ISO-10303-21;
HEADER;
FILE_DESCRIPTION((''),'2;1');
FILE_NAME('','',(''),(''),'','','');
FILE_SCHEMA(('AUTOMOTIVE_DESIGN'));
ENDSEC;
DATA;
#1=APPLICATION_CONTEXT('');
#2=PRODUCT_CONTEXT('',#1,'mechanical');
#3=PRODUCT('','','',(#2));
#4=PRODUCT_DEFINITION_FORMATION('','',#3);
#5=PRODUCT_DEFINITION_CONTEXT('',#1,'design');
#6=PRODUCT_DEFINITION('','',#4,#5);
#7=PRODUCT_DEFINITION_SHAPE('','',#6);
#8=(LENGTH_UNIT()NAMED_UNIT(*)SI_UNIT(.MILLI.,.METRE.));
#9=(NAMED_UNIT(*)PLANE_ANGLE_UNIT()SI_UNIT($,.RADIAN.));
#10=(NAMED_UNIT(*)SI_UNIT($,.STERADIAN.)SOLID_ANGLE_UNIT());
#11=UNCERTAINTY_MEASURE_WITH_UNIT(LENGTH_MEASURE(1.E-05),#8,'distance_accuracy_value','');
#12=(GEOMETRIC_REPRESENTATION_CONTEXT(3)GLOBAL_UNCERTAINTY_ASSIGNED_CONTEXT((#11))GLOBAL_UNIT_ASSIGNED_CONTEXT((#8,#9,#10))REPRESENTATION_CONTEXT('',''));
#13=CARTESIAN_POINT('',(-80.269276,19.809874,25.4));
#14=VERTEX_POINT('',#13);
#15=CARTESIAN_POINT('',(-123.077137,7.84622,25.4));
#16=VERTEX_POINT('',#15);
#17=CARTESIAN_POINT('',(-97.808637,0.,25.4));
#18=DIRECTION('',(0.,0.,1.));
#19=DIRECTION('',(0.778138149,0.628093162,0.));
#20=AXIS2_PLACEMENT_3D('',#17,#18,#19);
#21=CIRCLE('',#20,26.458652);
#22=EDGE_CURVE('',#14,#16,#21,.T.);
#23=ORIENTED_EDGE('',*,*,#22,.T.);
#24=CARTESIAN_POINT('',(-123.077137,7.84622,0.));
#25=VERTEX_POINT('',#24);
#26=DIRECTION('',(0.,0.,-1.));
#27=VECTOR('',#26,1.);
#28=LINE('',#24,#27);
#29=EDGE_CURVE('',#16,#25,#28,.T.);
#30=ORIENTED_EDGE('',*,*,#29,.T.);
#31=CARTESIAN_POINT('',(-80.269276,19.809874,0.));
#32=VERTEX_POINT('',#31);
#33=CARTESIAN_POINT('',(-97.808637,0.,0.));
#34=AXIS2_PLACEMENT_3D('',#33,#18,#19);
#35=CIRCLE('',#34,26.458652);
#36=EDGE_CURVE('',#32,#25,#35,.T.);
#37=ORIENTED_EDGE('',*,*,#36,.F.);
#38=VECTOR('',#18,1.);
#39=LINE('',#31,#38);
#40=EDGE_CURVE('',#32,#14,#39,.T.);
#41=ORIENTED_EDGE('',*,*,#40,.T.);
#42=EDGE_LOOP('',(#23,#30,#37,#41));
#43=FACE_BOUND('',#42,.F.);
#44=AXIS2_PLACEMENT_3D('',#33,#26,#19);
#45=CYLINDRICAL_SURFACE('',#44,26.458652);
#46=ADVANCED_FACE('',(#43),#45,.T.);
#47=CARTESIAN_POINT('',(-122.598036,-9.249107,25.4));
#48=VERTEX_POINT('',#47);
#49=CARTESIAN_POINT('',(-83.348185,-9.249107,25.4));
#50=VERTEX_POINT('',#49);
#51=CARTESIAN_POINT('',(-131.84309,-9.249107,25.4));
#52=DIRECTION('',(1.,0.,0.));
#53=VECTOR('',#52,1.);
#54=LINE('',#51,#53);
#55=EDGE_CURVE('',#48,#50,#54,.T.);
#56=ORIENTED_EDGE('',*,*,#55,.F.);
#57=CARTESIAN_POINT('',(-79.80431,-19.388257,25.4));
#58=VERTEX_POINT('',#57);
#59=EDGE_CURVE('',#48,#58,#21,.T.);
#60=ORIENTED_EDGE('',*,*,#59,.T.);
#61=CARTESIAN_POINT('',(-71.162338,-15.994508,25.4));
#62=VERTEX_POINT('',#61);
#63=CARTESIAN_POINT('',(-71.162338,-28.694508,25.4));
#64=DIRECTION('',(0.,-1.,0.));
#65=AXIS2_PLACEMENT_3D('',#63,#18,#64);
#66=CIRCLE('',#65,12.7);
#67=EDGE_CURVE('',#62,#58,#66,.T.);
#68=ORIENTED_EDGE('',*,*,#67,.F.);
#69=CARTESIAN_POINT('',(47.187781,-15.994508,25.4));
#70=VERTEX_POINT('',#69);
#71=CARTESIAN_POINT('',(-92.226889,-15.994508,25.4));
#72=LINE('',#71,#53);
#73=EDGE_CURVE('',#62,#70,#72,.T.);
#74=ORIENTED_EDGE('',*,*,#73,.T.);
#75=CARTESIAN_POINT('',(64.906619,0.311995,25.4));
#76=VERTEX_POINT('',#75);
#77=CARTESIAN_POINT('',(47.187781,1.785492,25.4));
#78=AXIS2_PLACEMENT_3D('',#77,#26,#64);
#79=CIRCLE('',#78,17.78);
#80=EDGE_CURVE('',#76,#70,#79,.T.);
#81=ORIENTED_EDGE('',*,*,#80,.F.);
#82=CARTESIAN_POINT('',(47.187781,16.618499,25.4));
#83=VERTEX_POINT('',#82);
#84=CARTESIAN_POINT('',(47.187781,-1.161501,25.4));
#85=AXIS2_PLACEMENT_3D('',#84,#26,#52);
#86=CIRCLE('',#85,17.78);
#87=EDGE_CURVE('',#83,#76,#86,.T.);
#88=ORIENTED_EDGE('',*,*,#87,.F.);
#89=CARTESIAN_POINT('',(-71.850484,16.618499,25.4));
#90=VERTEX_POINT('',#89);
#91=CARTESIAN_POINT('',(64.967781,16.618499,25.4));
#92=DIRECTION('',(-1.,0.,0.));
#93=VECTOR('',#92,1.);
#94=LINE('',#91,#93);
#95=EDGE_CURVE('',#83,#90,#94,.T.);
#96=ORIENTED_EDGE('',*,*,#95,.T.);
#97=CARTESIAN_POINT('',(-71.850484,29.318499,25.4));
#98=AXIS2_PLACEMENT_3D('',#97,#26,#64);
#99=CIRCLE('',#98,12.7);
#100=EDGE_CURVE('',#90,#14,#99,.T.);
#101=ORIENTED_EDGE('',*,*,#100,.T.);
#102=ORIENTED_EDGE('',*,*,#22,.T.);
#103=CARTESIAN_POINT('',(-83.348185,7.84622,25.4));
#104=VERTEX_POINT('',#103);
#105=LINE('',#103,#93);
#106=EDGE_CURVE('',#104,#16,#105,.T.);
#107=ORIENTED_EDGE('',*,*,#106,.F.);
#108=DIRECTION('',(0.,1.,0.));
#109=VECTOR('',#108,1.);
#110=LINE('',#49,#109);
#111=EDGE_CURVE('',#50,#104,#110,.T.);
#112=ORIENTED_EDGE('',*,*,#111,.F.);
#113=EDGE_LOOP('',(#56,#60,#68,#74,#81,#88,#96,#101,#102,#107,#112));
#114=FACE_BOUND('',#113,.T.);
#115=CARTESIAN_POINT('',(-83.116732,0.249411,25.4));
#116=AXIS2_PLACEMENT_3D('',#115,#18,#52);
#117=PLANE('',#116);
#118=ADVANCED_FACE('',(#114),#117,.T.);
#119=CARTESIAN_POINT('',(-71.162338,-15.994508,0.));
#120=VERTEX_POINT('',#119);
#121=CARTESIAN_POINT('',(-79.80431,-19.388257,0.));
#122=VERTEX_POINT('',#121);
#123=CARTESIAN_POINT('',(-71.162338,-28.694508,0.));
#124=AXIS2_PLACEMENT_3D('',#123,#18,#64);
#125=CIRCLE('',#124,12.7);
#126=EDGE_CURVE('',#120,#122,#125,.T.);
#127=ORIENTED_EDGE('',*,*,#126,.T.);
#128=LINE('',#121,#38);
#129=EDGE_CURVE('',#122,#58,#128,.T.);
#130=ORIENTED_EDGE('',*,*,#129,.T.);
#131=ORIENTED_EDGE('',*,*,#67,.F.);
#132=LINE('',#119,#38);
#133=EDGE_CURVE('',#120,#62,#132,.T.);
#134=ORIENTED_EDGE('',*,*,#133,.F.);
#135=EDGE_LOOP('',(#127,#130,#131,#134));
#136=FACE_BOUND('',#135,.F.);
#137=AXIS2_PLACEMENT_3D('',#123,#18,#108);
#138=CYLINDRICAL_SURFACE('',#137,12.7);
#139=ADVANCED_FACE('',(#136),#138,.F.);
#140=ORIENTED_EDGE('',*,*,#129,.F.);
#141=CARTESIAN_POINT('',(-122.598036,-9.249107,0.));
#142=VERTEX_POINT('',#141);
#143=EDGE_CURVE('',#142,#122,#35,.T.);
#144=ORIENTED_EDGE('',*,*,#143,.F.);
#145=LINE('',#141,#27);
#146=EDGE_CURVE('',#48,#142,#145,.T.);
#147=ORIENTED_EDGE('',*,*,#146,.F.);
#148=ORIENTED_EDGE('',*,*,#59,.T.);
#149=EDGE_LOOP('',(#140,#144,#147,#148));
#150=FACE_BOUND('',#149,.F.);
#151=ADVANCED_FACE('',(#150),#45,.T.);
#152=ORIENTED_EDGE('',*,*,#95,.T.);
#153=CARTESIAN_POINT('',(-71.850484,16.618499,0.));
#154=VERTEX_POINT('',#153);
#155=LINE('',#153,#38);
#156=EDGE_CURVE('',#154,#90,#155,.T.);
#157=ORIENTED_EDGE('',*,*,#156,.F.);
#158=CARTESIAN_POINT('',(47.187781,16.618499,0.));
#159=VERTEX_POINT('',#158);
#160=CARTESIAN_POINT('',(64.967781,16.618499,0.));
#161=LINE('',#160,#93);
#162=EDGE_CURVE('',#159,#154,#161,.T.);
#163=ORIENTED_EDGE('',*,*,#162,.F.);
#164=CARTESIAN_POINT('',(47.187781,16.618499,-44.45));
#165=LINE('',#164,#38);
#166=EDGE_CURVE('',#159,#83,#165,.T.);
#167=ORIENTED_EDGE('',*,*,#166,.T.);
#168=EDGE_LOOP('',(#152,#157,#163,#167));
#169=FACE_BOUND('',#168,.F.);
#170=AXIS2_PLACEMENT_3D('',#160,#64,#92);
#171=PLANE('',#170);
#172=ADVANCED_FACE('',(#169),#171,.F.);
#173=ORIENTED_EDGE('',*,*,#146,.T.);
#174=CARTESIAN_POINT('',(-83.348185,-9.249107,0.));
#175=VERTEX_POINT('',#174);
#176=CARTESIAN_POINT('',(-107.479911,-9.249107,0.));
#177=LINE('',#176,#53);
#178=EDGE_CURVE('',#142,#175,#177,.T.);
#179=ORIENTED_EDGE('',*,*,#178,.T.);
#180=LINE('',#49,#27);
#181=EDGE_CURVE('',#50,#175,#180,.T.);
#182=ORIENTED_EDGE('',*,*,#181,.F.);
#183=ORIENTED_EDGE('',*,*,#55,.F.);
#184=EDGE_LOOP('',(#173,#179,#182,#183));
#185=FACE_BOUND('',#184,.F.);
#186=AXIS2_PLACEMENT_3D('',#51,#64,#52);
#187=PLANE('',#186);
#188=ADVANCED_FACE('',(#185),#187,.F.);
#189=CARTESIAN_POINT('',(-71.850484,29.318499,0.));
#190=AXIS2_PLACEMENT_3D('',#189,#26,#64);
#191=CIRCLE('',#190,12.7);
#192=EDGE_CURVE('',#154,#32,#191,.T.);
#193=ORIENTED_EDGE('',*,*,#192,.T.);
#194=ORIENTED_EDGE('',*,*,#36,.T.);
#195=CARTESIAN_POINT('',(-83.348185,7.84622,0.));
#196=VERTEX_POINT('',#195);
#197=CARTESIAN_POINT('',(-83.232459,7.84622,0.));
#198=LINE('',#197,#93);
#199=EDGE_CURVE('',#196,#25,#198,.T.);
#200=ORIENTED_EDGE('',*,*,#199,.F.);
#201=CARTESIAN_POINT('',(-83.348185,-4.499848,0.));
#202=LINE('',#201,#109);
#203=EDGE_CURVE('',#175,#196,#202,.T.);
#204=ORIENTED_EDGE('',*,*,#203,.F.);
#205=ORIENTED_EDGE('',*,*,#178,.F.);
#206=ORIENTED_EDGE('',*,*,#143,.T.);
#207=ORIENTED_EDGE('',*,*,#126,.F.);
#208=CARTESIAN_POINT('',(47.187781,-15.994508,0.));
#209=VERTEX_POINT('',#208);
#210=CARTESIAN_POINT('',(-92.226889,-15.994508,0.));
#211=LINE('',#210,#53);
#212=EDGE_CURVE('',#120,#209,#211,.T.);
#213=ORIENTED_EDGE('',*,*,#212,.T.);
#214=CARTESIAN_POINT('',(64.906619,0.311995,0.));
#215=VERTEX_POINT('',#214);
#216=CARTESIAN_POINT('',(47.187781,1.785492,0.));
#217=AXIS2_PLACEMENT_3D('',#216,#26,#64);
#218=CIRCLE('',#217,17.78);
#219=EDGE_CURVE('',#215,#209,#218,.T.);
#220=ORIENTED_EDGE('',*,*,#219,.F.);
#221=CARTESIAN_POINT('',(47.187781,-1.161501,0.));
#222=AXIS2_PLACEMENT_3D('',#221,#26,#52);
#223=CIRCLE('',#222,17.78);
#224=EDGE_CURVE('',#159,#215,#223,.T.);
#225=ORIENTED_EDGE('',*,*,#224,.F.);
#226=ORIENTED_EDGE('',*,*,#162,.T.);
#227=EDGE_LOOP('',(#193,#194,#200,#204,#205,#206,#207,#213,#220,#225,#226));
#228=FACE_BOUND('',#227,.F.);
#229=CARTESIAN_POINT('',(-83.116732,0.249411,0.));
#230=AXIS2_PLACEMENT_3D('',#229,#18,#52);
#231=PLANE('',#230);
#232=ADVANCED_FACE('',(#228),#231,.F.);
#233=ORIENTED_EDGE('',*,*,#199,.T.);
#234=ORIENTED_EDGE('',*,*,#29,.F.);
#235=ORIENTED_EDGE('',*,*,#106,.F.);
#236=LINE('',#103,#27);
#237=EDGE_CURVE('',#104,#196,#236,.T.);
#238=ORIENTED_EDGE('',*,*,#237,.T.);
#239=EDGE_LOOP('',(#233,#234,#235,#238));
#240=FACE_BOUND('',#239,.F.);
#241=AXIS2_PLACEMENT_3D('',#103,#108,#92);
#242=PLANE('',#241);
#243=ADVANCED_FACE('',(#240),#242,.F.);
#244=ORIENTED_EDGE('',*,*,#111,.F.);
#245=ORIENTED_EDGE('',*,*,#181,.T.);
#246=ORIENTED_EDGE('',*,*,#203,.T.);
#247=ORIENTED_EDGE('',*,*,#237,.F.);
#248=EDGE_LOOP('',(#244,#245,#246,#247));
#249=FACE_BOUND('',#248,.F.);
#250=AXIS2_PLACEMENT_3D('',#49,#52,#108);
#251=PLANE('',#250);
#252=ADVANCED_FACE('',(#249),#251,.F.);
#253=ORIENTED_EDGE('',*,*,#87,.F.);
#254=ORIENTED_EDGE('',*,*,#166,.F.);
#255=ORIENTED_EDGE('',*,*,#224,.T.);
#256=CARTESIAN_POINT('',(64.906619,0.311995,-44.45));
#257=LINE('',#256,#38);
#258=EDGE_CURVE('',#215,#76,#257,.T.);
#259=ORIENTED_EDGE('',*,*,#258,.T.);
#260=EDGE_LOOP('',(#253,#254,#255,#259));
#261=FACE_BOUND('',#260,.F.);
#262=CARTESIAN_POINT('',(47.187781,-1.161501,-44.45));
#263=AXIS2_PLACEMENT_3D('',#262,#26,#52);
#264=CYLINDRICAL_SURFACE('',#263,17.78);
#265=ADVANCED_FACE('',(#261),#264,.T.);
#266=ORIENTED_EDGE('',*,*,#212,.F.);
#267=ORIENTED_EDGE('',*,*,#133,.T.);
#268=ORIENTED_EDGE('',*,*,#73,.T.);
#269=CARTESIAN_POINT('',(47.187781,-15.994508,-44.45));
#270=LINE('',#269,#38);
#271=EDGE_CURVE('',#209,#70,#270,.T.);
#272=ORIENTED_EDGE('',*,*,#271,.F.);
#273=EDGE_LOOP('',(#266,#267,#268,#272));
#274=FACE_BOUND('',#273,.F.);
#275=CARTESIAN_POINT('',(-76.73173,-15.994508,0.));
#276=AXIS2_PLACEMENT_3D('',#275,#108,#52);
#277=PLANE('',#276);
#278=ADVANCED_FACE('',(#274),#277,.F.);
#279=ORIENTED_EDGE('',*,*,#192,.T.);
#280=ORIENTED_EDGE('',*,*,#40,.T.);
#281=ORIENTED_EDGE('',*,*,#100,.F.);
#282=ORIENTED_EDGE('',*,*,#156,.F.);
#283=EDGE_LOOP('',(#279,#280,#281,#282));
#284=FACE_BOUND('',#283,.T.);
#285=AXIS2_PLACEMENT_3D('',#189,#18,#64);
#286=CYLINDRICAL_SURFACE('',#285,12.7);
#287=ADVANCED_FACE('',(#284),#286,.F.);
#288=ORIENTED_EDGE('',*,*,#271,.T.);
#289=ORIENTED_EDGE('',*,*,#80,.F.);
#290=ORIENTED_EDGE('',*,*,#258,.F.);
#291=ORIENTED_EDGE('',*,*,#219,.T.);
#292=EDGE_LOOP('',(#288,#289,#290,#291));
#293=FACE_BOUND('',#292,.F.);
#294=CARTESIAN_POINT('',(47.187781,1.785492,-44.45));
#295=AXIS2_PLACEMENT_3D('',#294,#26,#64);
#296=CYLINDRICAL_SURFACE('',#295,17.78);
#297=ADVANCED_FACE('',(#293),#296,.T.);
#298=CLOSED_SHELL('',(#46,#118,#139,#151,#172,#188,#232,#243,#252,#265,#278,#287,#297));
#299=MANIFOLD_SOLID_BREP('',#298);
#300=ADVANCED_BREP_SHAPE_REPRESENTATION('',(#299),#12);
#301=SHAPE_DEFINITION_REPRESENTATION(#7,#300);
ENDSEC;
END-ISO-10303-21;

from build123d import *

# Parameters (mm, degrees)
F1_DEPTH    = 25.4
F3_DEPTH    = 38.1
F4_R        = 12.7
F5_R        = 12.7
F6_T1_DEPTH = 114.3


# Not quite as in the source:
# - a fillet or chamfer that OpenCascade refuses, or shapes differently, is made with other operations: its cross-section is extruded or revolved along the edge and cut away or added


with BuildPart() as f1:
    # F0 (on Top) → F1 (new body)
    with BuildSketch(Plane.XY):
        with BuildLine():
            Line((-77.2201499837, 16.618498601), (-92.2268889844, 16.618498601))
            Line((-92.2268889844, 16.618498601), (-92.2268889844, -15.9945080916))
            Line((-92.2268889844, -15.9945080916), (-76.7317300981, -15.9945080916))
            ThreePointArc((-76.7317300981, -15.9945080916), (-72.7314875025, -8.4378237077), (-71.3499844152, 0))
            ThreePointArc((-71.3499844152, 0), (-72.8606518933, 8.8123966597), (-77.2201499837, 16.618498601))
        make_face()
        with BuildLine():
            Line((64.9677813053, 16.618498601), (-77.2201499837, 16.618498601))
            ThreePointArc((-77.2201499837, 16.618498601), (-72.8606518933, 8.8123966597), (-71.3499844152, 0))
            ThreePointArc((-71.3499844152, 0), (-72.7314875025, -8.4378237077), (-76.7317300981, -15.9945080916))
            Line((-76.7317300981, -15.9945080916), (64.9677813053, -15.9945080916))
            Line((64.9677813053, -15.9945080916), (64.9677813053, 16.618498601))
        make_face()
        with BuildLine():
            Line((-92.2268889844, -15.9945080916), (-92.2268889844, 16.618498601))
            Line((-92.2268889844, 16.618498601), (-77.2201499837, 16.618498601))
            ThreePointArc((-77.2201499837, 16.618498601), (-124.2643223617, -0.3962064299), (-76.7317300981, -15.9945080916))
            Line((-76.7317300981, -15.9945080916), (-92.2268889844, -15.9945080916))
        make_face()
    extrude(amount=F1_DEPTH)

    # F2 (on face) → F3 (cut)
    with BuildSketch(Plane.XY.offset(25.4)):
        with BuildLine():
            Line((-83.348184824, 7.8462203965), (-123.0771370274, 7.8462203965))
            ThreePointArc((-123.0771370274, 7.8462203965), (-124.2569046236, -0.741220082), (-122.5980357113, -9.2491069809))
            Line((-122.5980357113, -9.2491069809), (-83.348184824, -9.2491069809))
            Line((-83.348184824, -9.2491069809), (-83.348184824, 7.8462203965))
        make_face()
        with BuildLine():
            Line((-123.0771370274, 7.8462203965), (-131.8430900574, 7.8462203965))
            Line((-131.8430900574, 7.8462203965), (-131.8430900574, -9.2491069809))
            Line((-131.8430900574, -9.2491069809), (-122.5980357113, -9.2491069809))
            ThreePointArc((-122.5980357113, -9.2491069809), (-124.2569046236, -0.741220082), (-123.0771370274, 7.8462203965))
        make_face()
    extrude(amount=-F3_DEPTH, mode=Mode.SUBTRACT)

    # F4
    f4_edges = [f1.edges().sort_by_distance(p)[0] for p in [
        (-77.22015, 16.618499, 12.7),
    ]]
    fillet(f4_edges, radius=F4_R)

    # F5
    f5_edges = [f1.edges().sort_by_distance(p)[0] for p in [
        (-76.73173, -15.994508, 12.7),
    ]]
    fillet(f5_edges, radius=F5_R)

    # F6: fillet of radius 17.78 on 2 edges, made by hand

    # F6_s2 → F6_t1 (cut)
    with BuildSketch(Plane.XY.offset(-44.45)):
        with BuildLine():
            ThreePointArc((64.9677813053, -1.161501399), (59.7601398748, 11.4108571705), (47.1877813053, 16.618498601))
            Line((47.1877813053, 16.618498601), (64.9677813053, 16.618498601))
            Line((64.9677813053, 16.618498601), (64.9677813053, -1.161501399))
        make_face()
        with BuildLine():
            ThreePointArc((47.1877813053, -15.9945080916), (59.7601398748, -10.7868666611), (64.9677813053, 1.7854919084))
            Line((64.9677813053, 1.7854919084), (64.9677813053, -15.9945080916))
            Line((64.9677813053, -15.9945080916), (47.1877813053, -15.9945080916))
        make_face()
    extrude(amount=F6_T1_DEPTH, mode=Mode.SUBTRACT)


solid = f1.part
